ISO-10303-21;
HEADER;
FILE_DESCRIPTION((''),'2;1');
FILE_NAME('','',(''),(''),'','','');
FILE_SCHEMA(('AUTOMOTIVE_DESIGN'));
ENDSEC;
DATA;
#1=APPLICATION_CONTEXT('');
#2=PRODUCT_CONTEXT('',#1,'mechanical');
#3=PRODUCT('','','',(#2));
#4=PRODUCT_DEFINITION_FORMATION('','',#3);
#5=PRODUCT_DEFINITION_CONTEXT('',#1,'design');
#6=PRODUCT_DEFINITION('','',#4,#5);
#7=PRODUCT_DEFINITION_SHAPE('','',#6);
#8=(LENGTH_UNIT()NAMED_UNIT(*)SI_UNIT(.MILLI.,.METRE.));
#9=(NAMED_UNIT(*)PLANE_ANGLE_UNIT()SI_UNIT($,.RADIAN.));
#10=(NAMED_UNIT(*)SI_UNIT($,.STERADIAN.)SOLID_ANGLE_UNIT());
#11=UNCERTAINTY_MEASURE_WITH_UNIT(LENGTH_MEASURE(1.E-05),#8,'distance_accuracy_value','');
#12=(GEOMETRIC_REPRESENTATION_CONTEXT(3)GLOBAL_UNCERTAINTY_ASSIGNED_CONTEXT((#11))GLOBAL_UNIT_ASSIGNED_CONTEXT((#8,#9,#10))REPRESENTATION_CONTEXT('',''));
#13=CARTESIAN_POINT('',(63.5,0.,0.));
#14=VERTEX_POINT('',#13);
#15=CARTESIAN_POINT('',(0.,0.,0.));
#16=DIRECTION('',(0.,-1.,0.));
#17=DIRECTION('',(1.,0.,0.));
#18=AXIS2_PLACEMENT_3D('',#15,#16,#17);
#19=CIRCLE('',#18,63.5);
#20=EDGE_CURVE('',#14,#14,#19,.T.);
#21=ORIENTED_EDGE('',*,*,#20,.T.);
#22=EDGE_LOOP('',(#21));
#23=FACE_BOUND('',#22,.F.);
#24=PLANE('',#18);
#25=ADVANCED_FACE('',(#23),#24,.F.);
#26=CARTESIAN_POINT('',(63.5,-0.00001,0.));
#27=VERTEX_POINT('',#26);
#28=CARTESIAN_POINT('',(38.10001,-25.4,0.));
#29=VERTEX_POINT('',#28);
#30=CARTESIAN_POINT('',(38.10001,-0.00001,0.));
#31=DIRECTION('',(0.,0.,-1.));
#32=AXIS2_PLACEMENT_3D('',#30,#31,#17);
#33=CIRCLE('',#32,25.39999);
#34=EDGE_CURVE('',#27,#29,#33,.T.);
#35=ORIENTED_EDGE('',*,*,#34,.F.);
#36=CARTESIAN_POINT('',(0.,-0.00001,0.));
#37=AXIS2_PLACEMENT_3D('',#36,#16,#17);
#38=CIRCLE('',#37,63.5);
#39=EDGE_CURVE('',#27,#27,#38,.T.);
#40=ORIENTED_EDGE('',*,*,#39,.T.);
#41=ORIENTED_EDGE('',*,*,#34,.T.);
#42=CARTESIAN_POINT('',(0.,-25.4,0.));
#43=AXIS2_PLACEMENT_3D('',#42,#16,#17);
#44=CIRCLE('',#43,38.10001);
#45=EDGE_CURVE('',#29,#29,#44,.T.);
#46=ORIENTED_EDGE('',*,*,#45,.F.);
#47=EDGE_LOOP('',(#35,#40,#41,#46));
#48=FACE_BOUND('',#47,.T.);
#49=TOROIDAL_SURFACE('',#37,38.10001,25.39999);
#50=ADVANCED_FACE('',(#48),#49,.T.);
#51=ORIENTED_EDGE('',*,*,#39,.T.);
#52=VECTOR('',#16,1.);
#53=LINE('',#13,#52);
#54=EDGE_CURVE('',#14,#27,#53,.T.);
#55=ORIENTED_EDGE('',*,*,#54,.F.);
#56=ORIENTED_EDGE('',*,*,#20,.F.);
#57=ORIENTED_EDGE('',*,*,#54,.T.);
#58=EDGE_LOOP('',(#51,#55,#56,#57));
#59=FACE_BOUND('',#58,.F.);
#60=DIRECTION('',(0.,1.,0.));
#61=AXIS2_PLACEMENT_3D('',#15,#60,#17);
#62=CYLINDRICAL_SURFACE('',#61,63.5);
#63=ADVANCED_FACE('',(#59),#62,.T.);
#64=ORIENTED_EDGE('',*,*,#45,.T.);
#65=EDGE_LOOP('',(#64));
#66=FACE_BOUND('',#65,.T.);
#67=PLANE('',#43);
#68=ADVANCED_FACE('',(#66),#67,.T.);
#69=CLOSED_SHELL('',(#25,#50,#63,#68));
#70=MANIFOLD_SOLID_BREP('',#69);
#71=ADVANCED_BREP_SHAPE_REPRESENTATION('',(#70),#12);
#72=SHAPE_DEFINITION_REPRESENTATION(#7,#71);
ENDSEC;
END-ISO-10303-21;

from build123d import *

# Parameters (mm, degrees)
F0_R     = 63.5
F1_DEPTH = 25.4
F2_R     = 25.39999


# Not quite as in the source:
# - a fillet or chamfer is up to 0.001 mm smaller than in the source, because OpenCascade refuses the exact size


with BuildPart() as f1:
    # F0 (on Front) → F1 (new body)
    with BuildSketch(Plane.XZ):
        Circle(F0_R)
    extrude(amount=F1_DEPTH)

    # F2 (radius 25.4 in the source; OpenCascade refuses exactly that, so slightly less here)
    f2_edges = [f1.edges().sort_by_distance(p)[0] for p in [
        (-63.5, -25.4, 0),
    ]]
    fillet(f2_edges, radius=F2_R)


solid = f1.part
